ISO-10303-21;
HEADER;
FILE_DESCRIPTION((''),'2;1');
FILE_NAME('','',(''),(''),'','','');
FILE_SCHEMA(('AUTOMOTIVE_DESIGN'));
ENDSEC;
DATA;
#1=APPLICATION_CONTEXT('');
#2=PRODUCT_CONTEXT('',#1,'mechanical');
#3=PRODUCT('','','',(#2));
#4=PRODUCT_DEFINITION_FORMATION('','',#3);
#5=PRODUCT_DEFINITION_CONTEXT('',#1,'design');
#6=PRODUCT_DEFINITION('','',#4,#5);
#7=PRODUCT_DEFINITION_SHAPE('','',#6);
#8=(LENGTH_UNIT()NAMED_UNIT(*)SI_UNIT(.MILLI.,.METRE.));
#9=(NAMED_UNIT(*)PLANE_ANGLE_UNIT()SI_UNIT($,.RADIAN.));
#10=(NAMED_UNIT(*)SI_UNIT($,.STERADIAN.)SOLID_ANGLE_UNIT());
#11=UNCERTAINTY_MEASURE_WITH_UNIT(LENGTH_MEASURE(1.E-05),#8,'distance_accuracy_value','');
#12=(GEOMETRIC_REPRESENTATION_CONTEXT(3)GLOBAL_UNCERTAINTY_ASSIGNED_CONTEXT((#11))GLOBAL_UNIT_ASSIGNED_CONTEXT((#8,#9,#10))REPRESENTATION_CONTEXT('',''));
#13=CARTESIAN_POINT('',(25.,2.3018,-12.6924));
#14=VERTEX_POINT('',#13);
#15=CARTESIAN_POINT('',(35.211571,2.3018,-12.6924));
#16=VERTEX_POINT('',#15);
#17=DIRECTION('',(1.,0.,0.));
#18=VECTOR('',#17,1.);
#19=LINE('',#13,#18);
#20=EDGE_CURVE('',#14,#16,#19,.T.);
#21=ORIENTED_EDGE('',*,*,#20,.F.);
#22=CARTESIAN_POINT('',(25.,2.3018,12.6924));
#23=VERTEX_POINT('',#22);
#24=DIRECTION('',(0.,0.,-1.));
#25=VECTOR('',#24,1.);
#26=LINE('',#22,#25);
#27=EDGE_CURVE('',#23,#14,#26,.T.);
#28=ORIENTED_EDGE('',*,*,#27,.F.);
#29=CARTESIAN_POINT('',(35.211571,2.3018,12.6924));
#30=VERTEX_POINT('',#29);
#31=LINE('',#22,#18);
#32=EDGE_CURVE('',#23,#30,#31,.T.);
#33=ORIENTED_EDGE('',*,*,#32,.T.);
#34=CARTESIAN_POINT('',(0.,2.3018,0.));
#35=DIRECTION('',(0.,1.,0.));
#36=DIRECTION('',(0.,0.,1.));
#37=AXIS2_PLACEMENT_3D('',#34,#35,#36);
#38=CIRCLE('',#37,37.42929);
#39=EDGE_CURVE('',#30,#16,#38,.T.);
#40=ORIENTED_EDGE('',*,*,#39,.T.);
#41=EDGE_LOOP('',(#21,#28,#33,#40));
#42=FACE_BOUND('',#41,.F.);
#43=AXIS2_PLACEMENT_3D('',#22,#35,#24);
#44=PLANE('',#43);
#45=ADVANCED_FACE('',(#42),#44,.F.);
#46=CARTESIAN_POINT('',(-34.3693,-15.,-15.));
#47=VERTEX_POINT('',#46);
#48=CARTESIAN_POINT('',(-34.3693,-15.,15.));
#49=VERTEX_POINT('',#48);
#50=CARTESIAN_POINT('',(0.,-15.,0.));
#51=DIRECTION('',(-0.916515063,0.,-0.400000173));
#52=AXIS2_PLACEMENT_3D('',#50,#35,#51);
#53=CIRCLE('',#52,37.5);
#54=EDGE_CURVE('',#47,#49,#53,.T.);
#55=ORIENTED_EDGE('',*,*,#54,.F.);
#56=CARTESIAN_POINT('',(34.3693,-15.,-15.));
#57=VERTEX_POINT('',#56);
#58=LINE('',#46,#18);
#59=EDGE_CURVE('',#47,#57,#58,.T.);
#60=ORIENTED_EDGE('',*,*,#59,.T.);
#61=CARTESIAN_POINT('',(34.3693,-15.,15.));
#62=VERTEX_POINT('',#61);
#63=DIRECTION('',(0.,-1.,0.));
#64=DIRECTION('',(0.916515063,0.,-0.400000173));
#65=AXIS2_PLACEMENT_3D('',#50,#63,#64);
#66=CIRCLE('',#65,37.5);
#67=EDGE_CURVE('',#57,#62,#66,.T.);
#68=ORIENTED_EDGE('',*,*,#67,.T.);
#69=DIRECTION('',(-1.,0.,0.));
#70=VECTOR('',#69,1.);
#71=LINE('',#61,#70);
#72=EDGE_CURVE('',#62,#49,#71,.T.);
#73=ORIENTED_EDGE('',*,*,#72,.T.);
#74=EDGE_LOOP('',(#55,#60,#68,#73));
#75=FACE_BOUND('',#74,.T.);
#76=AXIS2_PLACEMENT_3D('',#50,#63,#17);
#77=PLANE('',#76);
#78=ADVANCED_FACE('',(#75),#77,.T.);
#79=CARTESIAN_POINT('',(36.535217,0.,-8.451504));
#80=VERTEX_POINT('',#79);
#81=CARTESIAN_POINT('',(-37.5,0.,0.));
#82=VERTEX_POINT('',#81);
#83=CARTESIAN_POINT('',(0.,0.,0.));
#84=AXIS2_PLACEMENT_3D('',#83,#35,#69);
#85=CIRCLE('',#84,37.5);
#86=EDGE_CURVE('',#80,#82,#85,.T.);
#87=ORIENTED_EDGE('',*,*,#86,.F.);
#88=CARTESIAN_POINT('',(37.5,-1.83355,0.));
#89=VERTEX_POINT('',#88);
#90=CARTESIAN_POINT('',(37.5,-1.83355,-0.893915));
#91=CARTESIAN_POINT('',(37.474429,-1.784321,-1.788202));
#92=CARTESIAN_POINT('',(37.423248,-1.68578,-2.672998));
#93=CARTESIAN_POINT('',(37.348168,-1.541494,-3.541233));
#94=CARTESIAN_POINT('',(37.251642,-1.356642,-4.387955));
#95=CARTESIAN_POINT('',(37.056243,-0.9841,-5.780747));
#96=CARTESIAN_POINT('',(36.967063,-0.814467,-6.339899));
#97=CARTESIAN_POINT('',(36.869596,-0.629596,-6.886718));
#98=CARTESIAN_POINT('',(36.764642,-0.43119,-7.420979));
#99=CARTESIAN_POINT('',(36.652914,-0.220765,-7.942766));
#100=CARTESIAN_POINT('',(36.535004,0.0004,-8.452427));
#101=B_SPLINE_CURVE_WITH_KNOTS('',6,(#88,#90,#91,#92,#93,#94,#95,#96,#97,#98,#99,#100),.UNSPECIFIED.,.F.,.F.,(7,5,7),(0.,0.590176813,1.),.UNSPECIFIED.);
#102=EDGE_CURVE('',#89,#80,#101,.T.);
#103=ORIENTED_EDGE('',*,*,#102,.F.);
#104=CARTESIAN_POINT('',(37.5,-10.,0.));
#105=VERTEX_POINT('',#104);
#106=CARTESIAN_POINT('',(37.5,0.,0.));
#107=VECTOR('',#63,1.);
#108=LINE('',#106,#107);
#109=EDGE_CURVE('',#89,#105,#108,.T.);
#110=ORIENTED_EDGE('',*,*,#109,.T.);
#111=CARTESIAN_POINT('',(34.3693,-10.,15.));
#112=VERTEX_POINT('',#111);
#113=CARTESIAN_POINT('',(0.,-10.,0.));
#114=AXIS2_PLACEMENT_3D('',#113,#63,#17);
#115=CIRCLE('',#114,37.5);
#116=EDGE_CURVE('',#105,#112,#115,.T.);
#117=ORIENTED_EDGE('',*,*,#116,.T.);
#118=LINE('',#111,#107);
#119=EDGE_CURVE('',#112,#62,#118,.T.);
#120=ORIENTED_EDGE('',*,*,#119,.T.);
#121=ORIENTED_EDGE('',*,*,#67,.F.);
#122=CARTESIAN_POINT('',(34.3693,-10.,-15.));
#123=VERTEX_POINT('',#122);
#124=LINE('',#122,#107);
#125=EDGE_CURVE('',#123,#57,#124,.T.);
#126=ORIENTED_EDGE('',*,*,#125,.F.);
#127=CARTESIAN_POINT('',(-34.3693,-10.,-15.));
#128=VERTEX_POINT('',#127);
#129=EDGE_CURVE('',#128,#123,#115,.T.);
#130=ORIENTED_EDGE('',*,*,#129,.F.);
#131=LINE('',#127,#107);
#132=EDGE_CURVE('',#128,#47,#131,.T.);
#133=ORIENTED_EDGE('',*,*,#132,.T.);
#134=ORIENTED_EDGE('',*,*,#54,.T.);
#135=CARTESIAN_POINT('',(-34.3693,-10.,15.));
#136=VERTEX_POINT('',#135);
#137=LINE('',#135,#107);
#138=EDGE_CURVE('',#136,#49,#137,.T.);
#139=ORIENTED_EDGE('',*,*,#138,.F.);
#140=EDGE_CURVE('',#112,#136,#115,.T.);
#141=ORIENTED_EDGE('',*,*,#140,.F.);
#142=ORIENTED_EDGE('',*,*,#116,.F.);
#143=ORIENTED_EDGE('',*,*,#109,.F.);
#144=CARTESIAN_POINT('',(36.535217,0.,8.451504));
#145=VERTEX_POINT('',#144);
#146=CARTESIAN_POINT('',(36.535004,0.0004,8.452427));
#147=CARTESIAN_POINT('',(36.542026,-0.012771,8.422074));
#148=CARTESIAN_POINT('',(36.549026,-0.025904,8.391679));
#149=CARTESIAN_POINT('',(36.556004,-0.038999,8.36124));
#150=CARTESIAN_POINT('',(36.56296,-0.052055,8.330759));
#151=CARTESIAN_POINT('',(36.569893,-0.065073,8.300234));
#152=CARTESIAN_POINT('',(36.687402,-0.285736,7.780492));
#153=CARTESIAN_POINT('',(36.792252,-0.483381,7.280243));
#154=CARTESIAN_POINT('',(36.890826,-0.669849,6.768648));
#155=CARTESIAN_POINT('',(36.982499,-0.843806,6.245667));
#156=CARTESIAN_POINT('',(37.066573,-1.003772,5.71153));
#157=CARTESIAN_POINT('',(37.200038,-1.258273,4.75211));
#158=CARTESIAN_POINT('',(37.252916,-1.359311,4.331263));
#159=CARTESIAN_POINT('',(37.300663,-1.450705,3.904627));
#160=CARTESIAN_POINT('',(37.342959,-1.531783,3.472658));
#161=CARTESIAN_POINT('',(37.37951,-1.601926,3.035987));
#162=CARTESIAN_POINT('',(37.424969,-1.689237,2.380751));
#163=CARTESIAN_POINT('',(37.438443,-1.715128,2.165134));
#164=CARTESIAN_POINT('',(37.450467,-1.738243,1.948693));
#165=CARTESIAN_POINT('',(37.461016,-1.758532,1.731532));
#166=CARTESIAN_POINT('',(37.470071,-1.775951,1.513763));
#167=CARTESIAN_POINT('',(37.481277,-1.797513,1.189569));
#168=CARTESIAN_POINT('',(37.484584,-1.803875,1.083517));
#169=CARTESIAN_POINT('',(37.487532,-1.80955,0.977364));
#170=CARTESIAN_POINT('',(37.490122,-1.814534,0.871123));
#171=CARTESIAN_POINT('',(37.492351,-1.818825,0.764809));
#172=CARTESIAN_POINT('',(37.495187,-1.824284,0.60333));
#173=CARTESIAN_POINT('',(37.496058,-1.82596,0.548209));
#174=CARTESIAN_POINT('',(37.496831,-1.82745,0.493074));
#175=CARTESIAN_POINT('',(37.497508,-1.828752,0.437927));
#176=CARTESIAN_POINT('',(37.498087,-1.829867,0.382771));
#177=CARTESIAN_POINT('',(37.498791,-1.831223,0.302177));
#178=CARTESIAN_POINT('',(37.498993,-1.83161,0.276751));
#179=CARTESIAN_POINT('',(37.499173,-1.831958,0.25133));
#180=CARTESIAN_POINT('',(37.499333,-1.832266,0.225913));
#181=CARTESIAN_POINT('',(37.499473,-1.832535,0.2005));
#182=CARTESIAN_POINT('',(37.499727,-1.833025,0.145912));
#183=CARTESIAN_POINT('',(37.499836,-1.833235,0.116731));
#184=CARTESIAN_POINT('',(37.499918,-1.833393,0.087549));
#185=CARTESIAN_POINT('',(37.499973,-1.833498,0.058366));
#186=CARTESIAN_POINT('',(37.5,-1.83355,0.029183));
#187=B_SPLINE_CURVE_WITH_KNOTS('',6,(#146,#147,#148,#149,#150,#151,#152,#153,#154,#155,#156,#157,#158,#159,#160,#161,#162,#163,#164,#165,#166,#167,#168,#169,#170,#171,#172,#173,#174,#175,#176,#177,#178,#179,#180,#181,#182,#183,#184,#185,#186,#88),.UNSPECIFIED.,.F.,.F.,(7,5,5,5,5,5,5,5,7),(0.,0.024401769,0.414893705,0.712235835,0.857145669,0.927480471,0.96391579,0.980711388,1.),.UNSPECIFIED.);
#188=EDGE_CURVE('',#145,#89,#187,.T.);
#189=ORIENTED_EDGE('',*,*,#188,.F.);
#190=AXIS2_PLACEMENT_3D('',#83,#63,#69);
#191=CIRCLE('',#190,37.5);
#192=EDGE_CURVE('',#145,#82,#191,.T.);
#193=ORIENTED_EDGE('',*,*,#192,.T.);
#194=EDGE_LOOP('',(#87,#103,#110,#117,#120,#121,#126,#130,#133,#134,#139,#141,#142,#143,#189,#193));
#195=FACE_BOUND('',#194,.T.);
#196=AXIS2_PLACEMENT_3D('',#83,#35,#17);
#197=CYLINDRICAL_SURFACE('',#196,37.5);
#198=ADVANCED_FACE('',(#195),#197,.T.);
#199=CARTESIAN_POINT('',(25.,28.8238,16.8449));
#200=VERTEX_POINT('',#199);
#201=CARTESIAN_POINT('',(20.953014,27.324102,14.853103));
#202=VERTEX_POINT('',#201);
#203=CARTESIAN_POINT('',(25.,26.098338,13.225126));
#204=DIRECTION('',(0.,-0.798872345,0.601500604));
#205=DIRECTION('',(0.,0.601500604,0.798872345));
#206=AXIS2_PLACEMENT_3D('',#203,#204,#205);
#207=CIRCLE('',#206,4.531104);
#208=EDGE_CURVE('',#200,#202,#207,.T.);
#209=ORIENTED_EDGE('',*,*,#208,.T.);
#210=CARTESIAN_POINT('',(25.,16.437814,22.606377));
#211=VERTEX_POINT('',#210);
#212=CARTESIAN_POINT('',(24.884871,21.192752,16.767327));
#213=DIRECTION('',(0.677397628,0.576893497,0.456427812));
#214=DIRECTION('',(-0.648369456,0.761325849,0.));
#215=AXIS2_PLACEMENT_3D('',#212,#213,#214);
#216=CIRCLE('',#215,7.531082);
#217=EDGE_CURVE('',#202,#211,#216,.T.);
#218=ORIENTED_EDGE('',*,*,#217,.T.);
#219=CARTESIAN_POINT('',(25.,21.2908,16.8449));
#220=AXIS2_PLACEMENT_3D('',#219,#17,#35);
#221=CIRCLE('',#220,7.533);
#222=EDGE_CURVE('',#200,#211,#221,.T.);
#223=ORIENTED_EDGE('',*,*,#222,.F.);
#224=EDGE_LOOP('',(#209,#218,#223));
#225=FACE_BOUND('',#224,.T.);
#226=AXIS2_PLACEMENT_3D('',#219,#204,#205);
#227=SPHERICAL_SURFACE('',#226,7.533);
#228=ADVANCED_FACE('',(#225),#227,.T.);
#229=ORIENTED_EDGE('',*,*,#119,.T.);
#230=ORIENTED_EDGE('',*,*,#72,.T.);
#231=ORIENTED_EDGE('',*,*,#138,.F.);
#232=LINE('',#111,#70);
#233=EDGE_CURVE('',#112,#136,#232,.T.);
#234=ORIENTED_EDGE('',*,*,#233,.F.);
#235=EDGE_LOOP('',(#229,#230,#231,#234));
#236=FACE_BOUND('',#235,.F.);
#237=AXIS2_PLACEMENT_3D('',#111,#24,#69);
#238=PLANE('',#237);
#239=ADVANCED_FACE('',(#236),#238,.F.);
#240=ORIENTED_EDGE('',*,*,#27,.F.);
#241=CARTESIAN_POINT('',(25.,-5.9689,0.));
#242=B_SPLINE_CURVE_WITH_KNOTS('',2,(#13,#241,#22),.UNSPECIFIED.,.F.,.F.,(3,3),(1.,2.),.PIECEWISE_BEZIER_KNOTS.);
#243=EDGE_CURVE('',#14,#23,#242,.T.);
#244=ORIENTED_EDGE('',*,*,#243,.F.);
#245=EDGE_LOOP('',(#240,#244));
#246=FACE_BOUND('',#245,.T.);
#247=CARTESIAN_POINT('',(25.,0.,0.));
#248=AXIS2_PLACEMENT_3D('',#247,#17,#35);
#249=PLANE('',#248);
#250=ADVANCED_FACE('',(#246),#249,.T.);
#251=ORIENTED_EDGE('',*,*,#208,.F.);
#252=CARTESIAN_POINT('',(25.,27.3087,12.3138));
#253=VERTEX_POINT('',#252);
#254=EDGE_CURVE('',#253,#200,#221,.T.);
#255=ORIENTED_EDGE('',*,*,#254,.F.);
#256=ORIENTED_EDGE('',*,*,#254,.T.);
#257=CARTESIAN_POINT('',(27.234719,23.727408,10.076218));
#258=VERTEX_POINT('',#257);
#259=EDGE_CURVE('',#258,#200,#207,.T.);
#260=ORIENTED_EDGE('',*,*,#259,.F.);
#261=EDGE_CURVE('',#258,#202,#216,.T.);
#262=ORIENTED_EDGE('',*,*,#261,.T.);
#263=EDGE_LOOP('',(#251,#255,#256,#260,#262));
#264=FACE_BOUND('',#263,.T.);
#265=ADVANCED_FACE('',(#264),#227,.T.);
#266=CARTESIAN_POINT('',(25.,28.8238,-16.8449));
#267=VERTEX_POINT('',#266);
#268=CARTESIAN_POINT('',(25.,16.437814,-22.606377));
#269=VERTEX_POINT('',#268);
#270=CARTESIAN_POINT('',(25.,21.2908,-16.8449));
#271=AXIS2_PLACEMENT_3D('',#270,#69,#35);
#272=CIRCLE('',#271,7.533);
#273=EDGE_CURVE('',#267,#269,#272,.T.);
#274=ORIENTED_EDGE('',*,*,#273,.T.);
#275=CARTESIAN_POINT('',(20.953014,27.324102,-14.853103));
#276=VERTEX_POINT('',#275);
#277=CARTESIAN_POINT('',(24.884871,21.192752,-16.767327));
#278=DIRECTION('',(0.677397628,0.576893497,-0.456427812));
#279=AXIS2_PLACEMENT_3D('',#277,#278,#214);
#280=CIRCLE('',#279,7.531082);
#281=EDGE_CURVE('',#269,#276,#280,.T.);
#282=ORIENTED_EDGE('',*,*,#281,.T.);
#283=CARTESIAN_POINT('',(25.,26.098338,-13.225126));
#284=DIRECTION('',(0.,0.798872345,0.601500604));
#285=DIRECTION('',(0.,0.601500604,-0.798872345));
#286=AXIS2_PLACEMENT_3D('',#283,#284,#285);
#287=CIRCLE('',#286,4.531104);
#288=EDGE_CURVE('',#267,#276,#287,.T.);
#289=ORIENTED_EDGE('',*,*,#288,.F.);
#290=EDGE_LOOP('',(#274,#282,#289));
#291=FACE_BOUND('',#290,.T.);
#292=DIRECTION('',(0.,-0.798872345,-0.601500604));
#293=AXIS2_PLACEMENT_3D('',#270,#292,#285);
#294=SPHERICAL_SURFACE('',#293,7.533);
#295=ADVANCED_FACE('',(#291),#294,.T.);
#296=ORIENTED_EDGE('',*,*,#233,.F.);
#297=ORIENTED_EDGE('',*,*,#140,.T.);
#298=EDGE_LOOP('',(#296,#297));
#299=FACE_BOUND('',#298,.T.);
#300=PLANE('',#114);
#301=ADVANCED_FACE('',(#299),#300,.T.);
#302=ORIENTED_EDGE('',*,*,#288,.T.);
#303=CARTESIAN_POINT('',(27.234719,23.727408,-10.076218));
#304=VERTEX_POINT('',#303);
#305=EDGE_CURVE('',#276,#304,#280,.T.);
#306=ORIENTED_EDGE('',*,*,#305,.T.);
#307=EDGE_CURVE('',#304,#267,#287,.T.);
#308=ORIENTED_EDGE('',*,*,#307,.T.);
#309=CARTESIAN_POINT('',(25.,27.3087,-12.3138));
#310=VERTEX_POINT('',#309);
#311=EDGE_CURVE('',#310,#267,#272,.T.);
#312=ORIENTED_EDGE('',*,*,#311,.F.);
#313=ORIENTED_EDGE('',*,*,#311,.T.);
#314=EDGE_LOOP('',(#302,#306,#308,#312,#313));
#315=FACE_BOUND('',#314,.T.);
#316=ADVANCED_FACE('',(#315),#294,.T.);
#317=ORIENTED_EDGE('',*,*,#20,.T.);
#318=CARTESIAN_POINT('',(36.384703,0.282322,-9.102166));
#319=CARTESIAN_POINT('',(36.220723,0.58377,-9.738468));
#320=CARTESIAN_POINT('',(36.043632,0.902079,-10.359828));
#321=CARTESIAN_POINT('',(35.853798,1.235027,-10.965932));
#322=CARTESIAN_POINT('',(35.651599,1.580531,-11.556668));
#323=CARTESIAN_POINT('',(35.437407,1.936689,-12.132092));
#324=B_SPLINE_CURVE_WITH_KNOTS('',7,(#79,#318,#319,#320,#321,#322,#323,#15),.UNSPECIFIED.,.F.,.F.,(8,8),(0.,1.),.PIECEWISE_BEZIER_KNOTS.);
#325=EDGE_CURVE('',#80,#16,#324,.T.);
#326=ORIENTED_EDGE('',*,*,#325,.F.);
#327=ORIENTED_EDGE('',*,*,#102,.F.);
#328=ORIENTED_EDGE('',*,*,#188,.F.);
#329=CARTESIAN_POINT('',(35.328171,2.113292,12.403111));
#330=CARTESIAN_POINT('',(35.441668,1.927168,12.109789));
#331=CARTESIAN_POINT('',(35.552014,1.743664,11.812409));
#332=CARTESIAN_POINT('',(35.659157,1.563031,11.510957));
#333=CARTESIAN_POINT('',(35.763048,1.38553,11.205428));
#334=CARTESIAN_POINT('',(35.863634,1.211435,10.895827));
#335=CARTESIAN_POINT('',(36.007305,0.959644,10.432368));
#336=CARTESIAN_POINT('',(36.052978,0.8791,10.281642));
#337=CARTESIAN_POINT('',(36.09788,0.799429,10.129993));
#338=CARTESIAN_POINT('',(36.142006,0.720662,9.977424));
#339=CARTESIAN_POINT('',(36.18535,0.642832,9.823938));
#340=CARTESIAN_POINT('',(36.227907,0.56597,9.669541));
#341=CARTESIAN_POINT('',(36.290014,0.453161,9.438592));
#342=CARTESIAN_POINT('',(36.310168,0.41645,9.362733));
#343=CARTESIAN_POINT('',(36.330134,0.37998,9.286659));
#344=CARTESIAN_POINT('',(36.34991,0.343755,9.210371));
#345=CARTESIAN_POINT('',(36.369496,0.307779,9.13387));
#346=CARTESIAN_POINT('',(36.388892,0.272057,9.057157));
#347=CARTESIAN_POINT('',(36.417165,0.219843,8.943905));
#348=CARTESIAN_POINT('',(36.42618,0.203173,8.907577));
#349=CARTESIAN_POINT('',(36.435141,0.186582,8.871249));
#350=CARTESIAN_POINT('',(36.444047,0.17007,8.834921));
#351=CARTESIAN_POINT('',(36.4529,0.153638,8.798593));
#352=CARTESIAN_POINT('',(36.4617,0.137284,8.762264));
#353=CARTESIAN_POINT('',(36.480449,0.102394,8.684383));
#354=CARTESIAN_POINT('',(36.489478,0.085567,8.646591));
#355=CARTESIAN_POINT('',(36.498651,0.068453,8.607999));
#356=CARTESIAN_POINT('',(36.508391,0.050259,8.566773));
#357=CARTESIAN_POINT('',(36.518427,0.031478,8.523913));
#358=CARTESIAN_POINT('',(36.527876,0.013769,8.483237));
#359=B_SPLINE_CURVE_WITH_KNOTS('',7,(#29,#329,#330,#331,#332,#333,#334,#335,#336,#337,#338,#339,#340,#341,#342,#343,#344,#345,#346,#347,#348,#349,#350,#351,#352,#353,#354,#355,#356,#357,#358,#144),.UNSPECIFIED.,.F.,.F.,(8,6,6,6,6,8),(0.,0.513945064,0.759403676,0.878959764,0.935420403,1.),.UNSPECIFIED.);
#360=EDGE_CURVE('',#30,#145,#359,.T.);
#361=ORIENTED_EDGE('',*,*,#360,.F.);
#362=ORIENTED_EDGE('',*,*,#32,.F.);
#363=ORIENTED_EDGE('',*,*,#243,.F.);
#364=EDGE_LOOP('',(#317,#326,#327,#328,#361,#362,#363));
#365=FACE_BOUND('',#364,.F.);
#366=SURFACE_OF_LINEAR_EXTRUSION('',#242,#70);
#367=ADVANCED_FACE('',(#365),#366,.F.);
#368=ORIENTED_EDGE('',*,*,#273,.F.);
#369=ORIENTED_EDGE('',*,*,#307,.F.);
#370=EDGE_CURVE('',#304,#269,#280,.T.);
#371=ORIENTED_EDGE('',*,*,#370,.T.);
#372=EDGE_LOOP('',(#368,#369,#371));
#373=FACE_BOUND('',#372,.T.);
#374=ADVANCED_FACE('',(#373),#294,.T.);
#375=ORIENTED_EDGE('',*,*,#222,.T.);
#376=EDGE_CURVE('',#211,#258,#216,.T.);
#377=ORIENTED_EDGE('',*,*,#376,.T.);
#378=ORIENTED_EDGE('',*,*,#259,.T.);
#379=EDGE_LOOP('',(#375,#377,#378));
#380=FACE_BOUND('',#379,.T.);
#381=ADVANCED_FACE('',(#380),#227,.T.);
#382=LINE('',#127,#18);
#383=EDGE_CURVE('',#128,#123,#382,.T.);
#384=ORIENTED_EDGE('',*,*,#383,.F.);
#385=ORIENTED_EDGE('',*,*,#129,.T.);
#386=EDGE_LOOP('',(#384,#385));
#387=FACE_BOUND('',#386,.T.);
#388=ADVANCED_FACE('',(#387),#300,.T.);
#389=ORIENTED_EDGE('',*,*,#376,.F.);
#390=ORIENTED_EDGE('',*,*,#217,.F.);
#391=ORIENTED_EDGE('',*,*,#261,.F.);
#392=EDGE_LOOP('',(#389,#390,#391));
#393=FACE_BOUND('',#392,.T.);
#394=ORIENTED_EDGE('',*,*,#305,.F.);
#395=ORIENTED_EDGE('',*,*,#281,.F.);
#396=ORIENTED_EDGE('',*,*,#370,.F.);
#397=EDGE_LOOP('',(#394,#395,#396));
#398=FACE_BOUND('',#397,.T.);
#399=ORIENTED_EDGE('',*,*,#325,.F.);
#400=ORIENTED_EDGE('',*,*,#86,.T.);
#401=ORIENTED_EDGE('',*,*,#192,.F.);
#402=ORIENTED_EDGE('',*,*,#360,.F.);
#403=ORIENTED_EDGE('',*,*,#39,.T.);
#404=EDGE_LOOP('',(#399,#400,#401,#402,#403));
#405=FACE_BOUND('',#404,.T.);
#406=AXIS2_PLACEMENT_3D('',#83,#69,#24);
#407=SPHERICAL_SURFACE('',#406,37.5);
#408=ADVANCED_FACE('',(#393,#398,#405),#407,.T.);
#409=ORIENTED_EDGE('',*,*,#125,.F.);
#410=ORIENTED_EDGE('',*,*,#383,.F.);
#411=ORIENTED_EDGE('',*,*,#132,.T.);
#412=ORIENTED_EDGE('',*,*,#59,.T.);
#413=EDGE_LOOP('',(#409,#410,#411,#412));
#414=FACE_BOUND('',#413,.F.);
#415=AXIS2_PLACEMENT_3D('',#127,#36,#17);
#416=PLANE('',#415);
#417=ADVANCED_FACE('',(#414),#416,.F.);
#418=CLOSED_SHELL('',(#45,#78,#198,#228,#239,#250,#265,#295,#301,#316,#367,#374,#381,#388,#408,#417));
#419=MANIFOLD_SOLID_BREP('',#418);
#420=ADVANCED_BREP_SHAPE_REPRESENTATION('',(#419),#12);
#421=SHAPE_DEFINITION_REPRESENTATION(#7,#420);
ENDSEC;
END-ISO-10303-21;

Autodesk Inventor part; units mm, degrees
ref_plane "XZ Plane" through (0, 0, 0) normal (0, 1, 0) x (-1, 0, 0)
ref_plane "XY Plane" through (0, 0, 0) normal (0, 0, 1) x (1, 0, 0)
sketch "Esquisse1" plane through (0, 0, 0) normal (0, 1, 0) x (-1, 0, 0)
  circle A0 centre (0, 0) radius 37.5
  line L0 (37.5, 0) -> (-37.5, 0)
  dimension "d0" = 75
revolve "Révolution1" add sketch "Esquisse1" angle 180 about axis through (-37.5, 0, 0) along (1, 0, 0) picked at (1.2379, -17.9235) contours A0 L0
sketch "Esquisse3" plane through (0, 0, 0) normal (0, -1, 0) x (1, 0, 0)
  circle A0 centre (0, 0) radius 37.5 projected
extrude "Extrusion2" add sketch "Esquisse3" along normal blind 10
sketch "Esquisse4" plane through (0, -10, 0) normal (0, -1, 0) x (1, 0, 0)
  circle A0 centre (0, 0) radius 37.5 projected
  line L0 (-52.5, 0) -> (52.5, 0) projected
  line L1 (34.3693, 15) -> (-34.3693, 15)
  line L2 (-34.3693, -15) -> (34.3693, -15)
  dimension "d8" = 15
  dimension "d9" = 15
extrude "Extrusion3" add sketch "Esquisse4" along normal blind 5 contours L0 A0 L1 | A0 L2 L0
ref_plane "Plan de construction1" through (25, 0, 0) normal (1, 0, 0) x (0, 1, 0)
sketch "Esquisse6" plane through (25, 0, 0) normal (1, 0, 0) x (0, 1, 0)
  line L0 (0, 37.5) -> (0, -37.5) projected
  circle A0 centre (21.2908, 16.8449) radius 7.533
  line L1 (27.3087, 12.3138) -> (15.2729, 21.376)
  line L2 (0, 0) -> (47.2705, 0) construction
ref_plane "Plan de construction2" through (34.3693, -10, 0) normal (0, 0, -1) x (-1, 0, 0)
revolve "Révolution2" add sketch "Esquisse6" angle 360 about axis through (25, 27.3087, 12.3138) along (0, -0.7988722, 0.6015008) picked at (22.6507, 18.9558) contours A0 L1
mirror "Symétrie1" about plane through (34.3693, -10, 0) normal (0, 0, -1) of "Révolution2"
sketch "Esquisse8" plane through (25, 0, 0) normal (1, 0, 0) x (0, 1, 0)
  line L0 (-10, -15) -> (-10, -15) construction
  line L1 (-10, -15) -> (-15, -15) construction
  line L2 (-15, 15) -> (-15, -15) construction
  line L3 (-10, 15) -> (-15, 15) construction
  line L4 (-10, 15) -> (-10, 15) construction
  line L5 (-10, 15) -> (-15, 15) construction
  line L6 (-15, -15) -> (-15, 15) construction
  line L7 (-10, -15) -> (-15, -15) construction
  line L8 (0, 37.5) -> (0, -37.5) construction
  line L9 (-15, 15) -> (-15, -15) construction
  line L10 (-15, 0) -> (31.9456, 0) construction
  line L11 (2.3018, 12.6924) -> (2.3018, -12.6924)
  line L12 (2.3018, -12.6924) -> (-5.9689, 0) construction
  line L13 (-5.9689, 0) -> (2.3018, 12.6924) construction
  spline S0 degree 2 poles (2.3018, -12.6924) (-5.9689, 0) (2.3018, 12.6924) knots 1 1 1 2 2 2
  line L14 (2.3018, 0) -> (-5.9689, 0) construction
  point P0 (0, 0)
extrude "Extrusion5" cut sketch "Esquisse8" along normal through all
equation "\"d9\" = d8"
properties part number "head3"
